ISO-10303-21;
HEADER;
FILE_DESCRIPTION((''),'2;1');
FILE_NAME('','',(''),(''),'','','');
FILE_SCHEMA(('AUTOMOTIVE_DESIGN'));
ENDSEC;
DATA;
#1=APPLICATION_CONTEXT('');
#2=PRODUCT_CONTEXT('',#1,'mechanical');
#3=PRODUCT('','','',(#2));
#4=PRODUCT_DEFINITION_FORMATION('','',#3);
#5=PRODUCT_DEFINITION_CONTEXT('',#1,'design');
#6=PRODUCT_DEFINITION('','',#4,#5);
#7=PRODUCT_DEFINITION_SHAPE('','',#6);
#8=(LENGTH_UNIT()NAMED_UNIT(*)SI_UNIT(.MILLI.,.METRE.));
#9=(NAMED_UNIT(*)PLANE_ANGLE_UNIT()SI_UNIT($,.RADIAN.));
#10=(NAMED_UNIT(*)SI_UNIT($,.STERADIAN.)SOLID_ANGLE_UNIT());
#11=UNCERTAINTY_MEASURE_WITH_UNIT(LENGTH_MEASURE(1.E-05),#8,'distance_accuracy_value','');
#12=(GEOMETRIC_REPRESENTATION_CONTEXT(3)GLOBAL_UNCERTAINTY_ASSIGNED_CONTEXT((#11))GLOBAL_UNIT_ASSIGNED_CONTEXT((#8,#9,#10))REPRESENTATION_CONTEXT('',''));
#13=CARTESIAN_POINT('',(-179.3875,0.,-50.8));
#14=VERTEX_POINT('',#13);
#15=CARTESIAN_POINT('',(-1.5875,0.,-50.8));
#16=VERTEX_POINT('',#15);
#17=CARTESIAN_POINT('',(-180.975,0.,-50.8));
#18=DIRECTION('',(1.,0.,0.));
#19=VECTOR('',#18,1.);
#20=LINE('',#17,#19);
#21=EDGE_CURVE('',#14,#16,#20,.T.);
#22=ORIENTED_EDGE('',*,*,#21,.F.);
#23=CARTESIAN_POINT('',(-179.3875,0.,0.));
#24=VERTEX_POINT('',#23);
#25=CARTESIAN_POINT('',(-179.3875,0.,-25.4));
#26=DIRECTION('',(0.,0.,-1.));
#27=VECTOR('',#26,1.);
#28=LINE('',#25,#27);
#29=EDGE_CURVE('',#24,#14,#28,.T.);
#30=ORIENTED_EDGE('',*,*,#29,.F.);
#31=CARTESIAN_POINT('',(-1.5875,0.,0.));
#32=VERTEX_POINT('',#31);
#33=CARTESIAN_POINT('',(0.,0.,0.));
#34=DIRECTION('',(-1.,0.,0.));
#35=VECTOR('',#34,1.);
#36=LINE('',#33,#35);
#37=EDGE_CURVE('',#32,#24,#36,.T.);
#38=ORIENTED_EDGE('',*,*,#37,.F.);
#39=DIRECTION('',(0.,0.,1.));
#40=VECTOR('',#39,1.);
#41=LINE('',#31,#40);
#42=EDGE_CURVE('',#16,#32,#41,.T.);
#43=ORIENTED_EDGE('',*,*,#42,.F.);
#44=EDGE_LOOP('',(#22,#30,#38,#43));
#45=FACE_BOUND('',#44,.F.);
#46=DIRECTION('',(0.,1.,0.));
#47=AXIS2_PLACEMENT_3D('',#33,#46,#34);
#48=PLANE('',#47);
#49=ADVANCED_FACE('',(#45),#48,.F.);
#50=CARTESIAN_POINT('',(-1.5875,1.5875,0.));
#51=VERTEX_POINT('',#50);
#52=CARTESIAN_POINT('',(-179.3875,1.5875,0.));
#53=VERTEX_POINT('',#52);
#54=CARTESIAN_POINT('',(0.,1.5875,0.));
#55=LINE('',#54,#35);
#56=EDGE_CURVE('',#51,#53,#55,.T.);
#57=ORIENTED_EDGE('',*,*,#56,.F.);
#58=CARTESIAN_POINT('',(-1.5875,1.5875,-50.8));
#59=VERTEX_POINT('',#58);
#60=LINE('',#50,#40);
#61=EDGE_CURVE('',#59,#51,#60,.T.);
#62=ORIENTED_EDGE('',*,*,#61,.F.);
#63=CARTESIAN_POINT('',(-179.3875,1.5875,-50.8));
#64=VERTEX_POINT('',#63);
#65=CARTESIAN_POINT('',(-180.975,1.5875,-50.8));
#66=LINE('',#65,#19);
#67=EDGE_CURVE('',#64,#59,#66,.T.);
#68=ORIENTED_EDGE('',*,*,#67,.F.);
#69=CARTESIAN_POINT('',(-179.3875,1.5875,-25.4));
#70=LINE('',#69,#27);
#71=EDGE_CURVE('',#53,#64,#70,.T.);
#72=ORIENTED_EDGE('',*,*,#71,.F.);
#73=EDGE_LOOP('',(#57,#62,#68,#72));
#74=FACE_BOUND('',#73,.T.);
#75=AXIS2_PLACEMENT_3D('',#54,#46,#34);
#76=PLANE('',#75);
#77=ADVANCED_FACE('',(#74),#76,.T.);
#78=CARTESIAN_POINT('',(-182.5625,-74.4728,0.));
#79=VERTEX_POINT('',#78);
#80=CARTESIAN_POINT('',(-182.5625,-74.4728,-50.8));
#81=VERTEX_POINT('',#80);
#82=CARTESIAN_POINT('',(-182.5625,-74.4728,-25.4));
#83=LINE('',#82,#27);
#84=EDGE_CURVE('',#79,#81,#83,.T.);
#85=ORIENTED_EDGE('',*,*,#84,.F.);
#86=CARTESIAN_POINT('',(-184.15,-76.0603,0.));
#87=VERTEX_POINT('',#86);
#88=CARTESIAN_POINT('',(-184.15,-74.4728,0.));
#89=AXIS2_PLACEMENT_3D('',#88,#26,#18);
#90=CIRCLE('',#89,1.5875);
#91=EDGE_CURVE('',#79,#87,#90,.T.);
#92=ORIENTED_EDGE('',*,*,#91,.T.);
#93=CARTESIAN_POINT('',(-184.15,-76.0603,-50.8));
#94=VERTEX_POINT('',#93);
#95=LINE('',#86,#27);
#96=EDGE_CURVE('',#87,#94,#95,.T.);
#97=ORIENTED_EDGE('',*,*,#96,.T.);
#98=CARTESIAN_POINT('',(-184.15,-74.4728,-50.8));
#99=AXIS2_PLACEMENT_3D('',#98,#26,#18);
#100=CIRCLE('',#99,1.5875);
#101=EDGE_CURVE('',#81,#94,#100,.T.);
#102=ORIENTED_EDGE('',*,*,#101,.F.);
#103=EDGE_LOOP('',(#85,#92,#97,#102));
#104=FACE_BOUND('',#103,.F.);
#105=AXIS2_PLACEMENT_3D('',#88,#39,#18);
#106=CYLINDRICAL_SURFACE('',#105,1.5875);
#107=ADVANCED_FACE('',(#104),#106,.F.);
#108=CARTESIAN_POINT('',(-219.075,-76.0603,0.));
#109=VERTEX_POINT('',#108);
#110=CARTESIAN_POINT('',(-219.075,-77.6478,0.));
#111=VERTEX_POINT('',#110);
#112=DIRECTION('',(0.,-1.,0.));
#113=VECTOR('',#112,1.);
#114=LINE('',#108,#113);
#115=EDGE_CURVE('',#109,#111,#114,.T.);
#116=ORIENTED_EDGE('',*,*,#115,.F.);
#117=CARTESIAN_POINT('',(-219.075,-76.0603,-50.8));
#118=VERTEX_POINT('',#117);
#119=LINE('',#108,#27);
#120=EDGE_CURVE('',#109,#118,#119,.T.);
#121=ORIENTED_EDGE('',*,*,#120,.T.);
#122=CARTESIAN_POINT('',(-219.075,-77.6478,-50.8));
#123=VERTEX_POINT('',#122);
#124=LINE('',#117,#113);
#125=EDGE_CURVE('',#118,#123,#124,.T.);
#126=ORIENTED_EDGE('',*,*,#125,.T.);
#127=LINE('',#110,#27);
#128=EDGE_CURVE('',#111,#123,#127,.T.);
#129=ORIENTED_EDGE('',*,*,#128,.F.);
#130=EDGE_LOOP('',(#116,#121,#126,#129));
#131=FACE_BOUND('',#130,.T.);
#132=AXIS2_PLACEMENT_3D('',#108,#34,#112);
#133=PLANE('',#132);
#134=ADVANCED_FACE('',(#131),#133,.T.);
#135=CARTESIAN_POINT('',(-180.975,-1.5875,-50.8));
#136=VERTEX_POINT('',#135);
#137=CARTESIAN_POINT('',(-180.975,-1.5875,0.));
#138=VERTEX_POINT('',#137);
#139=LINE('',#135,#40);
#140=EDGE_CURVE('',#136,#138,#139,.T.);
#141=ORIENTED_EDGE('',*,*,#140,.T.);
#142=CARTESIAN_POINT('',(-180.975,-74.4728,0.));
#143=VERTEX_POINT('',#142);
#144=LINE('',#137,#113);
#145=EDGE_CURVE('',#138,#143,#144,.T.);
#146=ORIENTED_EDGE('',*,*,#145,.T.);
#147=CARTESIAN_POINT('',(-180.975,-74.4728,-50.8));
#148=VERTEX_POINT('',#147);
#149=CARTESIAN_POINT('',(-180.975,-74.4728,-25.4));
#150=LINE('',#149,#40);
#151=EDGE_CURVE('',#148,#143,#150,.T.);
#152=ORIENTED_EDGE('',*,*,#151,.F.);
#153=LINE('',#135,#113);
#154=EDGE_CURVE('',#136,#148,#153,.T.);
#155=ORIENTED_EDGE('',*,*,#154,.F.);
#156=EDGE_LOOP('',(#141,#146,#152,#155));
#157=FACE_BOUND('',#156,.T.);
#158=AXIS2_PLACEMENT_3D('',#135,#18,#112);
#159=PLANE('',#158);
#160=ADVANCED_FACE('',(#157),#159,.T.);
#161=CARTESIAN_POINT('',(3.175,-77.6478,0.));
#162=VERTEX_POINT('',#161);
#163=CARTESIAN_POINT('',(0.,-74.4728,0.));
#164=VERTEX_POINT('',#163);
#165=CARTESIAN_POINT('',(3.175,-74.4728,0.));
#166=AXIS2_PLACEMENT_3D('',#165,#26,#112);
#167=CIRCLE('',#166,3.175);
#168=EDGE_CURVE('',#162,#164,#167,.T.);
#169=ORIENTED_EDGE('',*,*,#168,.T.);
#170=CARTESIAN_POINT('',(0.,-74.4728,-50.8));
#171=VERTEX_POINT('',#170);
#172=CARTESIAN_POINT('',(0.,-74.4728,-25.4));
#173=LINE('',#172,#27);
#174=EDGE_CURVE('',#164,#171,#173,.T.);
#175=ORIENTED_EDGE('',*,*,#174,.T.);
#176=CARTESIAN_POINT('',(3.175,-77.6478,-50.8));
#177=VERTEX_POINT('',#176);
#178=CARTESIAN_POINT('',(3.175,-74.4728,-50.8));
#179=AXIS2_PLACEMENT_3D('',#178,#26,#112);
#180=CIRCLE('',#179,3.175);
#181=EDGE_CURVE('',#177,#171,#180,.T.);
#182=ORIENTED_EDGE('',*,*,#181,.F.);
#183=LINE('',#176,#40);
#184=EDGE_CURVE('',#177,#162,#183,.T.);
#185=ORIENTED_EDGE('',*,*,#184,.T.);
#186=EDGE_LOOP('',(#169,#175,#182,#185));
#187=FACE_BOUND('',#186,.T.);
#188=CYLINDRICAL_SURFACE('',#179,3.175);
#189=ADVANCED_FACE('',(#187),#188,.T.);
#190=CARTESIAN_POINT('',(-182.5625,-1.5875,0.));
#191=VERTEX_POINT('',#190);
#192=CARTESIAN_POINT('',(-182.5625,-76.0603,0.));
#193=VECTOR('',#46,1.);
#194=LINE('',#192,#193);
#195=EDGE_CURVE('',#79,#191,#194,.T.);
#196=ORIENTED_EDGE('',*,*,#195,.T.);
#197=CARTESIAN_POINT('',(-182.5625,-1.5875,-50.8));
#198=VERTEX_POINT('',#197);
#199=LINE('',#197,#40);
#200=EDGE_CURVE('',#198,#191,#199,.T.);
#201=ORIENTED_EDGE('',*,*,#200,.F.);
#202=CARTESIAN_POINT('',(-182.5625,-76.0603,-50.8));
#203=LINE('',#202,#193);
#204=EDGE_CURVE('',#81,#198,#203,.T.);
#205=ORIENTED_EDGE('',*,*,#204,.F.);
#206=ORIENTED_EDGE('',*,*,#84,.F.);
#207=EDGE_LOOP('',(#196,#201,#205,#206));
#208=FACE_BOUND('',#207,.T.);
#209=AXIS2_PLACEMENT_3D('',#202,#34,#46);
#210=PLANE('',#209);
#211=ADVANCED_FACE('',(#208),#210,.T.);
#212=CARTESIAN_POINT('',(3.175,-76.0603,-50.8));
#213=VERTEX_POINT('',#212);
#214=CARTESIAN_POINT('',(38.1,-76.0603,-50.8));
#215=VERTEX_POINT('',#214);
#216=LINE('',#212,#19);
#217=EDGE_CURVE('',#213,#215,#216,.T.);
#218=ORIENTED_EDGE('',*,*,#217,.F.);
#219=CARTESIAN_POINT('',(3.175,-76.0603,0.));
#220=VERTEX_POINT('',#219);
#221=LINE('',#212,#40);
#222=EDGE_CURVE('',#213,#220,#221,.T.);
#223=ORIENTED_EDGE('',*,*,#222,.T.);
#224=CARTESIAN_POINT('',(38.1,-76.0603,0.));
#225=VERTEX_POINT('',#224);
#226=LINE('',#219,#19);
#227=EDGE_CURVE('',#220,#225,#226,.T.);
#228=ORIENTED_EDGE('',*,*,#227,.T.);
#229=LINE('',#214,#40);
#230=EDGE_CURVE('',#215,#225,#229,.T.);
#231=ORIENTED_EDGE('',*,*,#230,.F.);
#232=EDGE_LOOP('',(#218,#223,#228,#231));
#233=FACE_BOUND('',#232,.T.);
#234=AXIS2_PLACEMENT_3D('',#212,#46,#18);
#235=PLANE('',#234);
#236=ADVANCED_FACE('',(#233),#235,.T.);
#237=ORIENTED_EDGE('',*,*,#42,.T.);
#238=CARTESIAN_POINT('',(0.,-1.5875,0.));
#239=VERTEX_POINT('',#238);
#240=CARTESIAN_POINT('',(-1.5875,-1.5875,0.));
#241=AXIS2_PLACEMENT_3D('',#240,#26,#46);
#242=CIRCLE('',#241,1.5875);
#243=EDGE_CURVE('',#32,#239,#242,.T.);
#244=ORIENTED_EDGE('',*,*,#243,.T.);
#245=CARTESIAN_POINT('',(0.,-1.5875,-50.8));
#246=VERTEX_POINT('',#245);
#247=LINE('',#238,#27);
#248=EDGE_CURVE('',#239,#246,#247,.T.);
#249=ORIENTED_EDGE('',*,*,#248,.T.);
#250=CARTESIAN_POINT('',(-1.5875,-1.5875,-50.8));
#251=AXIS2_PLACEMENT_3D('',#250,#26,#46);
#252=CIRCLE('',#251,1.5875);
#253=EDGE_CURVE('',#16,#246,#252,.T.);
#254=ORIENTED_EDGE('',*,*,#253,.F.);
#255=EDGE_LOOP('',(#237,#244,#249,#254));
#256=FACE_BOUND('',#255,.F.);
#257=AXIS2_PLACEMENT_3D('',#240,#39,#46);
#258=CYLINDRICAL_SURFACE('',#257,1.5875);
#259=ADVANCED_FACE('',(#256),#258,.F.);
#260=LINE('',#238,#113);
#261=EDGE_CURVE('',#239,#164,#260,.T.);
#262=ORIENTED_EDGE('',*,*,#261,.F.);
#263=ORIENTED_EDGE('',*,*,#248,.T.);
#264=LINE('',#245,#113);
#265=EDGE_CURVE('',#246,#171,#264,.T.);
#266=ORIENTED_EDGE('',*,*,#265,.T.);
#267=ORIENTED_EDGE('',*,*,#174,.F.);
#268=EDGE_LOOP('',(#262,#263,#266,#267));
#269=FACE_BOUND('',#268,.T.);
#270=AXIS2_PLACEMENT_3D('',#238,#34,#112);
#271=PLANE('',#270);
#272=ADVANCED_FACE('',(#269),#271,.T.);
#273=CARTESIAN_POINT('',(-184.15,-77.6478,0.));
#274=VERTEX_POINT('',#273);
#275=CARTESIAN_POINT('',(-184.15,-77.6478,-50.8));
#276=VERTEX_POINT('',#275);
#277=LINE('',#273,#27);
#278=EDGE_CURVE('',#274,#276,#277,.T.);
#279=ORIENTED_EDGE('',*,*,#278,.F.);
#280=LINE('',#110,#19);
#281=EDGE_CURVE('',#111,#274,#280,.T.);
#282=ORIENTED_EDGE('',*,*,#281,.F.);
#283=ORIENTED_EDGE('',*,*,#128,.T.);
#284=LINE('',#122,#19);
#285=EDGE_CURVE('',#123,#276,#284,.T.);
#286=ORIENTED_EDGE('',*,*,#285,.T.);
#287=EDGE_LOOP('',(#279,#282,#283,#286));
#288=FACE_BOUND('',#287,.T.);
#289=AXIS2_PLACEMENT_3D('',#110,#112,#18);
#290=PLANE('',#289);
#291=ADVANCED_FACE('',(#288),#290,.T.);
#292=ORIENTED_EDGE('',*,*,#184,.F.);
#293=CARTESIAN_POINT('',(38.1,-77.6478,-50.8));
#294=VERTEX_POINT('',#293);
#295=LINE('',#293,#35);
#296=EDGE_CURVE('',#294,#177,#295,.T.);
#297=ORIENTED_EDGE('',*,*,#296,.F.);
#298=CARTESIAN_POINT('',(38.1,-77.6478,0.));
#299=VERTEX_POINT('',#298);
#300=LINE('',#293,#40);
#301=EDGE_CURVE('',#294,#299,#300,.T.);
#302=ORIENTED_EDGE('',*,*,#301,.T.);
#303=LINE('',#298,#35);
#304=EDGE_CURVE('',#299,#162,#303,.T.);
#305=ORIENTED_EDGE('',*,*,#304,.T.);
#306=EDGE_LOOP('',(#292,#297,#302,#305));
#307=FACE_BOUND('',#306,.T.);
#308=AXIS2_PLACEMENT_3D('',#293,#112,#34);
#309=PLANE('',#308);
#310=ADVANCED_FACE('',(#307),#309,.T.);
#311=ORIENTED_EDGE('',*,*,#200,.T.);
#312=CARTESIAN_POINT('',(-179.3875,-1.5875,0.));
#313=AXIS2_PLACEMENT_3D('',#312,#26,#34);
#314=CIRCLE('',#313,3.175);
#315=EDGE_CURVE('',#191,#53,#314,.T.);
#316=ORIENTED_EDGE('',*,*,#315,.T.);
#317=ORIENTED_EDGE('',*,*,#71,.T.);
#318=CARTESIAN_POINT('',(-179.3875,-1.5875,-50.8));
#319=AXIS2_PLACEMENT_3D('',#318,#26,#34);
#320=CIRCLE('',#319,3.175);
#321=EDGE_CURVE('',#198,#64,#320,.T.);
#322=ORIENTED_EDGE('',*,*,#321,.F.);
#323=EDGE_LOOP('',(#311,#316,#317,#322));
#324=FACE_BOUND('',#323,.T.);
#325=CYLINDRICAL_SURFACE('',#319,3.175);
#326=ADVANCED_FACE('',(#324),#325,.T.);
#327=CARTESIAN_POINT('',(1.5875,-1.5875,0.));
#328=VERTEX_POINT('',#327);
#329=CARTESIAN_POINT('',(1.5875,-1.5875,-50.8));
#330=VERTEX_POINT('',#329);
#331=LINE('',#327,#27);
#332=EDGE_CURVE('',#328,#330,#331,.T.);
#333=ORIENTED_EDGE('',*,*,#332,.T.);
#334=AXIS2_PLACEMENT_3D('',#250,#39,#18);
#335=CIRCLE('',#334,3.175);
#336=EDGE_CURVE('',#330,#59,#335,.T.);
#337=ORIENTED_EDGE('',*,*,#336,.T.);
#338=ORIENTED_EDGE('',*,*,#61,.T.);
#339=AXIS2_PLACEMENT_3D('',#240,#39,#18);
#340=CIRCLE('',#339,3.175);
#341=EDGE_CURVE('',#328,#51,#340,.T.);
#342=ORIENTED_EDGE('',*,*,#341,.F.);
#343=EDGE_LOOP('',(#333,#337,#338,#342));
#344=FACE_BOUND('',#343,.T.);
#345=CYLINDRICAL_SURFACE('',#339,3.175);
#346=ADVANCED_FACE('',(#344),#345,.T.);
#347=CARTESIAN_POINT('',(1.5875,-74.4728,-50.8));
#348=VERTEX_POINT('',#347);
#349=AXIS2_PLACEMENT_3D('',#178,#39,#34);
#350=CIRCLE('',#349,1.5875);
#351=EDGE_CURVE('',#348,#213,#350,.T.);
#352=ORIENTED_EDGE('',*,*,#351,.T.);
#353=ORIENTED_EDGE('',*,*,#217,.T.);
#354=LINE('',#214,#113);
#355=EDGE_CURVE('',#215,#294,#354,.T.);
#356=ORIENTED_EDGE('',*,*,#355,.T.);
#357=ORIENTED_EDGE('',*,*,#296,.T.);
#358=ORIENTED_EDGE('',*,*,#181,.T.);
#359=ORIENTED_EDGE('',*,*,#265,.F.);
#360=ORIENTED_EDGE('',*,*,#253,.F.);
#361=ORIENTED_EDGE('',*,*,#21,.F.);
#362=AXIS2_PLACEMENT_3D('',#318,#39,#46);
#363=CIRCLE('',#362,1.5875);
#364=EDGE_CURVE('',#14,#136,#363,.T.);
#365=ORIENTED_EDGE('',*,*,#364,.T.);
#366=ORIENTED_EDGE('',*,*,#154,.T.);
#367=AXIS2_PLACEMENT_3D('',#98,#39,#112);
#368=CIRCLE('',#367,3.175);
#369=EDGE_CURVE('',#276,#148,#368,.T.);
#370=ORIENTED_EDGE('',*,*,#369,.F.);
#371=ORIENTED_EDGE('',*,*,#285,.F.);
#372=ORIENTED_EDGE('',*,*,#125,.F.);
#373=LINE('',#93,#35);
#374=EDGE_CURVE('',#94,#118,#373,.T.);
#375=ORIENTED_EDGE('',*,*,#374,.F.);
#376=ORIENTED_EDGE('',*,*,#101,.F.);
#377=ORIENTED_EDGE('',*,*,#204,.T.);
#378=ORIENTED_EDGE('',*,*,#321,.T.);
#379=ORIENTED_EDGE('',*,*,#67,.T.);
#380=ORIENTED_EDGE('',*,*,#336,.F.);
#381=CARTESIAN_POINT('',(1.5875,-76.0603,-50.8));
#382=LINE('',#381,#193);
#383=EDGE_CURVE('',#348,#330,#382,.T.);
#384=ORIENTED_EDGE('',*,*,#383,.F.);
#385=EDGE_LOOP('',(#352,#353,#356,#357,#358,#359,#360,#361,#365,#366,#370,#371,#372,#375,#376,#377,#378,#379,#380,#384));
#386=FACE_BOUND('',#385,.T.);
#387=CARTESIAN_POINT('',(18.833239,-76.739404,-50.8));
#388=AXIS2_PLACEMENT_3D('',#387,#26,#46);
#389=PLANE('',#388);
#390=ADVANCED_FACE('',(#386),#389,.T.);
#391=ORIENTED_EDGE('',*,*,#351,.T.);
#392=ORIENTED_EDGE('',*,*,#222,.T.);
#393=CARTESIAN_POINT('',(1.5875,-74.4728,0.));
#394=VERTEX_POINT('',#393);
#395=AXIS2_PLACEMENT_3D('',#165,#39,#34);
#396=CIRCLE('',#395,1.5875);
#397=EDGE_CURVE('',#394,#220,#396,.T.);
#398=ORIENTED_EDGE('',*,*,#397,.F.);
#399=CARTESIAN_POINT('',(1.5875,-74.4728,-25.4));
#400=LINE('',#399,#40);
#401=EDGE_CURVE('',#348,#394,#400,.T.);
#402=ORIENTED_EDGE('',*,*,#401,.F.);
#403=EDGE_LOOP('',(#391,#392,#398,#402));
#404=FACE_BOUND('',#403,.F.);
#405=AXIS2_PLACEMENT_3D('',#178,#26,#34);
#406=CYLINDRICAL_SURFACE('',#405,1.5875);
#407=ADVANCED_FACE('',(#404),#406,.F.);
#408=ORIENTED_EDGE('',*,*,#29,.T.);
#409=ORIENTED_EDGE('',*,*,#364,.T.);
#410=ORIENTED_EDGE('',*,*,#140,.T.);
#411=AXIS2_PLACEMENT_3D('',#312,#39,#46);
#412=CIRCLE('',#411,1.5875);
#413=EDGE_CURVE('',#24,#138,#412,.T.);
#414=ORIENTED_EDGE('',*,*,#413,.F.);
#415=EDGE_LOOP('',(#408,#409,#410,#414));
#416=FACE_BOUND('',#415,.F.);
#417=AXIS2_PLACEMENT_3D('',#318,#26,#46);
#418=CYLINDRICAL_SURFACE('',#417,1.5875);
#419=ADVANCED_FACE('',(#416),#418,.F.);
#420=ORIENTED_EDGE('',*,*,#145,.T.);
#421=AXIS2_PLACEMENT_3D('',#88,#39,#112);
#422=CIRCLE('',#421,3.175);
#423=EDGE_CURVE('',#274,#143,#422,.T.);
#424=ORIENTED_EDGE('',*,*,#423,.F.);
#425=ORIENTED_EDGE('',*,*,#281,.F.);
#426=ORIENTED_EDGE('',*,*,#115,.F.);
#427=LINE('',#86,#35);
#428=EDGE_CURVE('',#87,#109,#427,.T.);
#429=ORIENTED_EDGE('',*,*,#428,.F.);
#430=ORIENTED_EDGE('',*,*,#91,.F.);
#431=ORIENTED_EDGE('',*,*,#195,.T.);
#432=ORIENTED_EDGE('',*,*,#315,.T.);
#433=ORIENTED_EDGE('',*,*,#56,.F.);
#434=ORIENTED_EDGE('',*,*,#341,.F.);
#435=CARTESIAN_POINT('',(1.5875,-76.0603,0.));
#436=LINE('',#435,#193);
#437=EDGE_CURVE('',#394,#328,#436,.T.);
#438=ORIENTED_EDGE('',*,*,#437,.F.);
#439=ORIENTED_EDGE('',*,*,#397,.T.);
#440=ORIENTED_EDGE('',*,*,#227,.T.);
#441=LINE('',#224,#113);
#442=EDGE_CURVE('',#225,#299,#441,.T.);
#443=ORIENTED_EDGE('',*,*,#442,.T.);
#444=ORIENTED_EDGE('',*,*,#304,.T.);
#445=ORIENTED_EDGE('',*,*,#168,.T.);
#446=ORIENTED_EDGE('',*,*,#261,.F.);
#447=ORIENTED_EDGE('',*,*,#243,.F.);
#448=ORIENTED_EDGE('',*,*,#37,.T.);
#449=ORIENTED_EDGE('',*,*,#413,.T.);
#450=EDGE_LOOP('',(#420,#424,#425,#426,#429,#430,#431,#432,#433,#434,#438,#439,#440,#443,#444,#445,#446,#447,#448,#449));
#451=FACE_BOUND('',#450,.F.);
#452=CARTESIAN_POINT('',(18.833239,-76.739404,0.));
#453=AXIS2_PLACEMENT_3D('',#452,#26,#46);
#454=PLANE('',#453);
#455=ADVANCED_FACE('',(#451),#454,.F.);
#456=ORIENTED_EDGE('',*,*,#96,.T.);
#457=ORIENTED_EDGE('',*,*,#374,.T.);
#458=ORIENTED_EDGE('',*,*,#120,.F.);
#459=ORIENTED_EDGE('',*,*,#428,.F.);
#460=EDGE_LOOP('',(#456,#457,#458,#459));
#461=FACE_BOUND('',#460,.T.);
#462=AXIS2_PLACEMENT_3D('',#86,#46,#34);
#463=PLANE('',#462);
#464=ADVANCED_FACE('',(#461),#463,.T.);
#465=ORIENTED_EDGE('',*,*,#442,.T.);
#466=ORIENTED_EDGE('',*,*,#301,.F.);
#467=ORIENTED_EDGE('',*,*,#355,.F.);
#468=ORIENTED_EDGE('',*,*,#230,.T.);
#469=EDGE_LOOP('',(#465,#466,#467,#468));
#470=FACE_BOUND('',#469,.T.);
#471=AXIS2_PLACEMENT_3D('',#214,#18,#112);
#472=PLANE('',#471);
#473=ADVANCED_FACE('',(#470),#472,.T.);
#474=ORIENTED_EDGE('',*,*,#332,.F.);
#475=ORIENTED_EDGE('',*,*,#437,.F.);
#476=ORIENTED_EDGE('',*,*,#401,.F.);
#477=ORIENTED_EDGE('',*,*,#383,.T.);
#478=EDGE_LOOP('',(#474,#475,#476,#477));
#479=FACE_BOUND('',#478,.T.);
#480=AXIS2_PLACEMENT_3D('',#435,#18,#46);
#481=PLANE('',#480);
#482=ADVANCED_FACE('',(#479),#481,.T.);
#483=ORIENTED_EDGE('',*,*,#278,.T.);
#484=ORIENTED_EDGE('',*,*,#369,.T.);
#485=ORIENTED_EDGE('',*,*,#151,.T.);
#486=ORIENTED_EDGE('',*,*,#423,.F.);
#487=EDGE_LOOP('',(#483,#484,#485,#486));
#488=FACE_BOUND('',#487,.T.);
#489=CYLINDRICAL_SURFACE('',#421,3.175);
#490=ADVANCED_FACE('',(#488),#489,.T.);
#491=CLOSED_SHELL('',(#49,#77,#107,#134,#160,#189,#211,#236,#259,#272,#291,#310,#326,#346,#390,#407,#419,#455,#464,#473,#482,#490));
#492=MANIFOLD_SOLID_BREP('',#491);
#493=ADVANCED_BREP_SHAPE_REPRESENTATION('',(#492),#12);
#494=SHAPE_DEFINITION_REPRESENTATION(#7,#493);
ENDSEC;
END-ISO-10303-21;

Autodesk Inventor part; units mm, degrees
ref_plane "YZ Plane" through (0, 0, 0) normal (1, 0, 0) x (0, 1, 0)
ref_plane "XZ Plane" through (0, 0, 0) normal (0, 1, 0) x (-1, 0, 0)
ref_plane "XY Plane" through (0, 0, 0) normal (0, 0, 1) x (1, 0, 0)
sketch "Sketch1" plane through (0, 0, 0) normal (0, 1, 0) x (-1, 0, 0)
  line L0 (0, 0) -> (180.975, 0)
  line L1 (180.975, 0) -> (180.975, -50.8)
  line L2 (180.975, -50.8) -> (0, -50.8)
  line L3 (0, -50.8) -> (0, 0)
  dimension "d0" = 180.975
  dimension "d1" = 50.8
extrude "Plate1" add sketch "Sketch1" along normal blind 1.5875
sketch "Sketch2" plane through (0, 0, 0) normal (1, 0, 0) x (0, 1, 0)
  line L0 (0, -50.8) -> (0, 0)
  line L1 (0, 0) -> (-76.0603, 0)
  line L2 (-76.0603, 0) -> (-76.0603, -50.8)
  line L3 (-76.0603, -50.8) -> (0, -50.8)
edge flange "Flange1" height 77.6478 angle 90 thickness 1.5875 bend radius 1.5875 thickness toward (1, 0, 0) relief straight relief width 1.5875 relief depth 0.7937 corner gap 1.5875 corner form 0 edges at (0, 0, -25.4) (-180.975, 0, -25.4) wall of the first edge with corners at (0, 0, -50.8) (0, 0, 0) (0, -76.0603, 0) (0, -76.0603, -50.8)
bend "Bend1"
corner "Corner1"
sketch "Sketch3" plane through (1.5875, -76.0603, -50.8) normal (0, -1, 0) x (1, 0, 0)
  line L0 (0, 50.8) -> (0, 0)
  line L1 (0, 0) -> (36.5125, 0)
  line L2 (36.5125, 0) -> (36.5125, 50.8)
  line L3 (36.5125, 50.8) -> (0, 50.8)
edge flange "Flange2" height 38.1 angle 90 thickness 1.5875 bend radius 1.5875 thickness toward (0, -1, 0) relief straight relief width 1.5875 relief depth 0.7937 corner gap 1.5875 corner form 0 edges at (1.5875, -76.0603, -25.4) (-182.5625, -76.0603, -25.4) wall of the first edge with corners at (1.5875, -76.0603, 0) (1.5875, -76.0603, -50.8) (38.1, -76.0603, -50.8) (38.1, -76.0603, 0)
bend "Bend2"
corner "Corner2"
equation "\"d3\" = BendReliefWidth"
equation "\"d4\" = BendReliefDepth"
equation "\"d5\" = MinimumRemnant"
equation "\"d6\" = BendRadius"
equation "\"d9\" = BendRadius"
equation "\"d10\" = CornerReliefSize"
equation "\"d11\" = GapSize"
equation "\"d12\" = JacobiRadiusSize"
equation "\"d13\" = BendReliefWidth"
equation "\"d14\" = BendReliefDepth"
equation "\"d15\" = MinimumRemnant"
equation "\"d16\" = BendRadius"
equation "\"d19\" = BendRadius"
equation "\"d20\" = CornerReliefSize"
equation "\"d21\" = GapSize"
equation "\"d22\" = JacobiRadiusSize"
equation "\"BendRadius\" = Thickness"
equation "\"BendReliefWidth\" = Thickness"
equation "\"BendReliefDepth\" = 0.5 * Thickness"
equation "\"CornerReliefSize\" = 4 * Thickness"
equation "\"MinimumRemnant\" = 2 * Thickness"
equation "\"TransitionRadius\" = BendRadius"
equation "\"JacobiRadiusSize\" = Thickness"
equation "\"GapSize\" = Thickness"
equation "\"d2\" = BendRadius"
equation "\"Thickness\" = 1.5875"
properties part number "batteryHolder"
